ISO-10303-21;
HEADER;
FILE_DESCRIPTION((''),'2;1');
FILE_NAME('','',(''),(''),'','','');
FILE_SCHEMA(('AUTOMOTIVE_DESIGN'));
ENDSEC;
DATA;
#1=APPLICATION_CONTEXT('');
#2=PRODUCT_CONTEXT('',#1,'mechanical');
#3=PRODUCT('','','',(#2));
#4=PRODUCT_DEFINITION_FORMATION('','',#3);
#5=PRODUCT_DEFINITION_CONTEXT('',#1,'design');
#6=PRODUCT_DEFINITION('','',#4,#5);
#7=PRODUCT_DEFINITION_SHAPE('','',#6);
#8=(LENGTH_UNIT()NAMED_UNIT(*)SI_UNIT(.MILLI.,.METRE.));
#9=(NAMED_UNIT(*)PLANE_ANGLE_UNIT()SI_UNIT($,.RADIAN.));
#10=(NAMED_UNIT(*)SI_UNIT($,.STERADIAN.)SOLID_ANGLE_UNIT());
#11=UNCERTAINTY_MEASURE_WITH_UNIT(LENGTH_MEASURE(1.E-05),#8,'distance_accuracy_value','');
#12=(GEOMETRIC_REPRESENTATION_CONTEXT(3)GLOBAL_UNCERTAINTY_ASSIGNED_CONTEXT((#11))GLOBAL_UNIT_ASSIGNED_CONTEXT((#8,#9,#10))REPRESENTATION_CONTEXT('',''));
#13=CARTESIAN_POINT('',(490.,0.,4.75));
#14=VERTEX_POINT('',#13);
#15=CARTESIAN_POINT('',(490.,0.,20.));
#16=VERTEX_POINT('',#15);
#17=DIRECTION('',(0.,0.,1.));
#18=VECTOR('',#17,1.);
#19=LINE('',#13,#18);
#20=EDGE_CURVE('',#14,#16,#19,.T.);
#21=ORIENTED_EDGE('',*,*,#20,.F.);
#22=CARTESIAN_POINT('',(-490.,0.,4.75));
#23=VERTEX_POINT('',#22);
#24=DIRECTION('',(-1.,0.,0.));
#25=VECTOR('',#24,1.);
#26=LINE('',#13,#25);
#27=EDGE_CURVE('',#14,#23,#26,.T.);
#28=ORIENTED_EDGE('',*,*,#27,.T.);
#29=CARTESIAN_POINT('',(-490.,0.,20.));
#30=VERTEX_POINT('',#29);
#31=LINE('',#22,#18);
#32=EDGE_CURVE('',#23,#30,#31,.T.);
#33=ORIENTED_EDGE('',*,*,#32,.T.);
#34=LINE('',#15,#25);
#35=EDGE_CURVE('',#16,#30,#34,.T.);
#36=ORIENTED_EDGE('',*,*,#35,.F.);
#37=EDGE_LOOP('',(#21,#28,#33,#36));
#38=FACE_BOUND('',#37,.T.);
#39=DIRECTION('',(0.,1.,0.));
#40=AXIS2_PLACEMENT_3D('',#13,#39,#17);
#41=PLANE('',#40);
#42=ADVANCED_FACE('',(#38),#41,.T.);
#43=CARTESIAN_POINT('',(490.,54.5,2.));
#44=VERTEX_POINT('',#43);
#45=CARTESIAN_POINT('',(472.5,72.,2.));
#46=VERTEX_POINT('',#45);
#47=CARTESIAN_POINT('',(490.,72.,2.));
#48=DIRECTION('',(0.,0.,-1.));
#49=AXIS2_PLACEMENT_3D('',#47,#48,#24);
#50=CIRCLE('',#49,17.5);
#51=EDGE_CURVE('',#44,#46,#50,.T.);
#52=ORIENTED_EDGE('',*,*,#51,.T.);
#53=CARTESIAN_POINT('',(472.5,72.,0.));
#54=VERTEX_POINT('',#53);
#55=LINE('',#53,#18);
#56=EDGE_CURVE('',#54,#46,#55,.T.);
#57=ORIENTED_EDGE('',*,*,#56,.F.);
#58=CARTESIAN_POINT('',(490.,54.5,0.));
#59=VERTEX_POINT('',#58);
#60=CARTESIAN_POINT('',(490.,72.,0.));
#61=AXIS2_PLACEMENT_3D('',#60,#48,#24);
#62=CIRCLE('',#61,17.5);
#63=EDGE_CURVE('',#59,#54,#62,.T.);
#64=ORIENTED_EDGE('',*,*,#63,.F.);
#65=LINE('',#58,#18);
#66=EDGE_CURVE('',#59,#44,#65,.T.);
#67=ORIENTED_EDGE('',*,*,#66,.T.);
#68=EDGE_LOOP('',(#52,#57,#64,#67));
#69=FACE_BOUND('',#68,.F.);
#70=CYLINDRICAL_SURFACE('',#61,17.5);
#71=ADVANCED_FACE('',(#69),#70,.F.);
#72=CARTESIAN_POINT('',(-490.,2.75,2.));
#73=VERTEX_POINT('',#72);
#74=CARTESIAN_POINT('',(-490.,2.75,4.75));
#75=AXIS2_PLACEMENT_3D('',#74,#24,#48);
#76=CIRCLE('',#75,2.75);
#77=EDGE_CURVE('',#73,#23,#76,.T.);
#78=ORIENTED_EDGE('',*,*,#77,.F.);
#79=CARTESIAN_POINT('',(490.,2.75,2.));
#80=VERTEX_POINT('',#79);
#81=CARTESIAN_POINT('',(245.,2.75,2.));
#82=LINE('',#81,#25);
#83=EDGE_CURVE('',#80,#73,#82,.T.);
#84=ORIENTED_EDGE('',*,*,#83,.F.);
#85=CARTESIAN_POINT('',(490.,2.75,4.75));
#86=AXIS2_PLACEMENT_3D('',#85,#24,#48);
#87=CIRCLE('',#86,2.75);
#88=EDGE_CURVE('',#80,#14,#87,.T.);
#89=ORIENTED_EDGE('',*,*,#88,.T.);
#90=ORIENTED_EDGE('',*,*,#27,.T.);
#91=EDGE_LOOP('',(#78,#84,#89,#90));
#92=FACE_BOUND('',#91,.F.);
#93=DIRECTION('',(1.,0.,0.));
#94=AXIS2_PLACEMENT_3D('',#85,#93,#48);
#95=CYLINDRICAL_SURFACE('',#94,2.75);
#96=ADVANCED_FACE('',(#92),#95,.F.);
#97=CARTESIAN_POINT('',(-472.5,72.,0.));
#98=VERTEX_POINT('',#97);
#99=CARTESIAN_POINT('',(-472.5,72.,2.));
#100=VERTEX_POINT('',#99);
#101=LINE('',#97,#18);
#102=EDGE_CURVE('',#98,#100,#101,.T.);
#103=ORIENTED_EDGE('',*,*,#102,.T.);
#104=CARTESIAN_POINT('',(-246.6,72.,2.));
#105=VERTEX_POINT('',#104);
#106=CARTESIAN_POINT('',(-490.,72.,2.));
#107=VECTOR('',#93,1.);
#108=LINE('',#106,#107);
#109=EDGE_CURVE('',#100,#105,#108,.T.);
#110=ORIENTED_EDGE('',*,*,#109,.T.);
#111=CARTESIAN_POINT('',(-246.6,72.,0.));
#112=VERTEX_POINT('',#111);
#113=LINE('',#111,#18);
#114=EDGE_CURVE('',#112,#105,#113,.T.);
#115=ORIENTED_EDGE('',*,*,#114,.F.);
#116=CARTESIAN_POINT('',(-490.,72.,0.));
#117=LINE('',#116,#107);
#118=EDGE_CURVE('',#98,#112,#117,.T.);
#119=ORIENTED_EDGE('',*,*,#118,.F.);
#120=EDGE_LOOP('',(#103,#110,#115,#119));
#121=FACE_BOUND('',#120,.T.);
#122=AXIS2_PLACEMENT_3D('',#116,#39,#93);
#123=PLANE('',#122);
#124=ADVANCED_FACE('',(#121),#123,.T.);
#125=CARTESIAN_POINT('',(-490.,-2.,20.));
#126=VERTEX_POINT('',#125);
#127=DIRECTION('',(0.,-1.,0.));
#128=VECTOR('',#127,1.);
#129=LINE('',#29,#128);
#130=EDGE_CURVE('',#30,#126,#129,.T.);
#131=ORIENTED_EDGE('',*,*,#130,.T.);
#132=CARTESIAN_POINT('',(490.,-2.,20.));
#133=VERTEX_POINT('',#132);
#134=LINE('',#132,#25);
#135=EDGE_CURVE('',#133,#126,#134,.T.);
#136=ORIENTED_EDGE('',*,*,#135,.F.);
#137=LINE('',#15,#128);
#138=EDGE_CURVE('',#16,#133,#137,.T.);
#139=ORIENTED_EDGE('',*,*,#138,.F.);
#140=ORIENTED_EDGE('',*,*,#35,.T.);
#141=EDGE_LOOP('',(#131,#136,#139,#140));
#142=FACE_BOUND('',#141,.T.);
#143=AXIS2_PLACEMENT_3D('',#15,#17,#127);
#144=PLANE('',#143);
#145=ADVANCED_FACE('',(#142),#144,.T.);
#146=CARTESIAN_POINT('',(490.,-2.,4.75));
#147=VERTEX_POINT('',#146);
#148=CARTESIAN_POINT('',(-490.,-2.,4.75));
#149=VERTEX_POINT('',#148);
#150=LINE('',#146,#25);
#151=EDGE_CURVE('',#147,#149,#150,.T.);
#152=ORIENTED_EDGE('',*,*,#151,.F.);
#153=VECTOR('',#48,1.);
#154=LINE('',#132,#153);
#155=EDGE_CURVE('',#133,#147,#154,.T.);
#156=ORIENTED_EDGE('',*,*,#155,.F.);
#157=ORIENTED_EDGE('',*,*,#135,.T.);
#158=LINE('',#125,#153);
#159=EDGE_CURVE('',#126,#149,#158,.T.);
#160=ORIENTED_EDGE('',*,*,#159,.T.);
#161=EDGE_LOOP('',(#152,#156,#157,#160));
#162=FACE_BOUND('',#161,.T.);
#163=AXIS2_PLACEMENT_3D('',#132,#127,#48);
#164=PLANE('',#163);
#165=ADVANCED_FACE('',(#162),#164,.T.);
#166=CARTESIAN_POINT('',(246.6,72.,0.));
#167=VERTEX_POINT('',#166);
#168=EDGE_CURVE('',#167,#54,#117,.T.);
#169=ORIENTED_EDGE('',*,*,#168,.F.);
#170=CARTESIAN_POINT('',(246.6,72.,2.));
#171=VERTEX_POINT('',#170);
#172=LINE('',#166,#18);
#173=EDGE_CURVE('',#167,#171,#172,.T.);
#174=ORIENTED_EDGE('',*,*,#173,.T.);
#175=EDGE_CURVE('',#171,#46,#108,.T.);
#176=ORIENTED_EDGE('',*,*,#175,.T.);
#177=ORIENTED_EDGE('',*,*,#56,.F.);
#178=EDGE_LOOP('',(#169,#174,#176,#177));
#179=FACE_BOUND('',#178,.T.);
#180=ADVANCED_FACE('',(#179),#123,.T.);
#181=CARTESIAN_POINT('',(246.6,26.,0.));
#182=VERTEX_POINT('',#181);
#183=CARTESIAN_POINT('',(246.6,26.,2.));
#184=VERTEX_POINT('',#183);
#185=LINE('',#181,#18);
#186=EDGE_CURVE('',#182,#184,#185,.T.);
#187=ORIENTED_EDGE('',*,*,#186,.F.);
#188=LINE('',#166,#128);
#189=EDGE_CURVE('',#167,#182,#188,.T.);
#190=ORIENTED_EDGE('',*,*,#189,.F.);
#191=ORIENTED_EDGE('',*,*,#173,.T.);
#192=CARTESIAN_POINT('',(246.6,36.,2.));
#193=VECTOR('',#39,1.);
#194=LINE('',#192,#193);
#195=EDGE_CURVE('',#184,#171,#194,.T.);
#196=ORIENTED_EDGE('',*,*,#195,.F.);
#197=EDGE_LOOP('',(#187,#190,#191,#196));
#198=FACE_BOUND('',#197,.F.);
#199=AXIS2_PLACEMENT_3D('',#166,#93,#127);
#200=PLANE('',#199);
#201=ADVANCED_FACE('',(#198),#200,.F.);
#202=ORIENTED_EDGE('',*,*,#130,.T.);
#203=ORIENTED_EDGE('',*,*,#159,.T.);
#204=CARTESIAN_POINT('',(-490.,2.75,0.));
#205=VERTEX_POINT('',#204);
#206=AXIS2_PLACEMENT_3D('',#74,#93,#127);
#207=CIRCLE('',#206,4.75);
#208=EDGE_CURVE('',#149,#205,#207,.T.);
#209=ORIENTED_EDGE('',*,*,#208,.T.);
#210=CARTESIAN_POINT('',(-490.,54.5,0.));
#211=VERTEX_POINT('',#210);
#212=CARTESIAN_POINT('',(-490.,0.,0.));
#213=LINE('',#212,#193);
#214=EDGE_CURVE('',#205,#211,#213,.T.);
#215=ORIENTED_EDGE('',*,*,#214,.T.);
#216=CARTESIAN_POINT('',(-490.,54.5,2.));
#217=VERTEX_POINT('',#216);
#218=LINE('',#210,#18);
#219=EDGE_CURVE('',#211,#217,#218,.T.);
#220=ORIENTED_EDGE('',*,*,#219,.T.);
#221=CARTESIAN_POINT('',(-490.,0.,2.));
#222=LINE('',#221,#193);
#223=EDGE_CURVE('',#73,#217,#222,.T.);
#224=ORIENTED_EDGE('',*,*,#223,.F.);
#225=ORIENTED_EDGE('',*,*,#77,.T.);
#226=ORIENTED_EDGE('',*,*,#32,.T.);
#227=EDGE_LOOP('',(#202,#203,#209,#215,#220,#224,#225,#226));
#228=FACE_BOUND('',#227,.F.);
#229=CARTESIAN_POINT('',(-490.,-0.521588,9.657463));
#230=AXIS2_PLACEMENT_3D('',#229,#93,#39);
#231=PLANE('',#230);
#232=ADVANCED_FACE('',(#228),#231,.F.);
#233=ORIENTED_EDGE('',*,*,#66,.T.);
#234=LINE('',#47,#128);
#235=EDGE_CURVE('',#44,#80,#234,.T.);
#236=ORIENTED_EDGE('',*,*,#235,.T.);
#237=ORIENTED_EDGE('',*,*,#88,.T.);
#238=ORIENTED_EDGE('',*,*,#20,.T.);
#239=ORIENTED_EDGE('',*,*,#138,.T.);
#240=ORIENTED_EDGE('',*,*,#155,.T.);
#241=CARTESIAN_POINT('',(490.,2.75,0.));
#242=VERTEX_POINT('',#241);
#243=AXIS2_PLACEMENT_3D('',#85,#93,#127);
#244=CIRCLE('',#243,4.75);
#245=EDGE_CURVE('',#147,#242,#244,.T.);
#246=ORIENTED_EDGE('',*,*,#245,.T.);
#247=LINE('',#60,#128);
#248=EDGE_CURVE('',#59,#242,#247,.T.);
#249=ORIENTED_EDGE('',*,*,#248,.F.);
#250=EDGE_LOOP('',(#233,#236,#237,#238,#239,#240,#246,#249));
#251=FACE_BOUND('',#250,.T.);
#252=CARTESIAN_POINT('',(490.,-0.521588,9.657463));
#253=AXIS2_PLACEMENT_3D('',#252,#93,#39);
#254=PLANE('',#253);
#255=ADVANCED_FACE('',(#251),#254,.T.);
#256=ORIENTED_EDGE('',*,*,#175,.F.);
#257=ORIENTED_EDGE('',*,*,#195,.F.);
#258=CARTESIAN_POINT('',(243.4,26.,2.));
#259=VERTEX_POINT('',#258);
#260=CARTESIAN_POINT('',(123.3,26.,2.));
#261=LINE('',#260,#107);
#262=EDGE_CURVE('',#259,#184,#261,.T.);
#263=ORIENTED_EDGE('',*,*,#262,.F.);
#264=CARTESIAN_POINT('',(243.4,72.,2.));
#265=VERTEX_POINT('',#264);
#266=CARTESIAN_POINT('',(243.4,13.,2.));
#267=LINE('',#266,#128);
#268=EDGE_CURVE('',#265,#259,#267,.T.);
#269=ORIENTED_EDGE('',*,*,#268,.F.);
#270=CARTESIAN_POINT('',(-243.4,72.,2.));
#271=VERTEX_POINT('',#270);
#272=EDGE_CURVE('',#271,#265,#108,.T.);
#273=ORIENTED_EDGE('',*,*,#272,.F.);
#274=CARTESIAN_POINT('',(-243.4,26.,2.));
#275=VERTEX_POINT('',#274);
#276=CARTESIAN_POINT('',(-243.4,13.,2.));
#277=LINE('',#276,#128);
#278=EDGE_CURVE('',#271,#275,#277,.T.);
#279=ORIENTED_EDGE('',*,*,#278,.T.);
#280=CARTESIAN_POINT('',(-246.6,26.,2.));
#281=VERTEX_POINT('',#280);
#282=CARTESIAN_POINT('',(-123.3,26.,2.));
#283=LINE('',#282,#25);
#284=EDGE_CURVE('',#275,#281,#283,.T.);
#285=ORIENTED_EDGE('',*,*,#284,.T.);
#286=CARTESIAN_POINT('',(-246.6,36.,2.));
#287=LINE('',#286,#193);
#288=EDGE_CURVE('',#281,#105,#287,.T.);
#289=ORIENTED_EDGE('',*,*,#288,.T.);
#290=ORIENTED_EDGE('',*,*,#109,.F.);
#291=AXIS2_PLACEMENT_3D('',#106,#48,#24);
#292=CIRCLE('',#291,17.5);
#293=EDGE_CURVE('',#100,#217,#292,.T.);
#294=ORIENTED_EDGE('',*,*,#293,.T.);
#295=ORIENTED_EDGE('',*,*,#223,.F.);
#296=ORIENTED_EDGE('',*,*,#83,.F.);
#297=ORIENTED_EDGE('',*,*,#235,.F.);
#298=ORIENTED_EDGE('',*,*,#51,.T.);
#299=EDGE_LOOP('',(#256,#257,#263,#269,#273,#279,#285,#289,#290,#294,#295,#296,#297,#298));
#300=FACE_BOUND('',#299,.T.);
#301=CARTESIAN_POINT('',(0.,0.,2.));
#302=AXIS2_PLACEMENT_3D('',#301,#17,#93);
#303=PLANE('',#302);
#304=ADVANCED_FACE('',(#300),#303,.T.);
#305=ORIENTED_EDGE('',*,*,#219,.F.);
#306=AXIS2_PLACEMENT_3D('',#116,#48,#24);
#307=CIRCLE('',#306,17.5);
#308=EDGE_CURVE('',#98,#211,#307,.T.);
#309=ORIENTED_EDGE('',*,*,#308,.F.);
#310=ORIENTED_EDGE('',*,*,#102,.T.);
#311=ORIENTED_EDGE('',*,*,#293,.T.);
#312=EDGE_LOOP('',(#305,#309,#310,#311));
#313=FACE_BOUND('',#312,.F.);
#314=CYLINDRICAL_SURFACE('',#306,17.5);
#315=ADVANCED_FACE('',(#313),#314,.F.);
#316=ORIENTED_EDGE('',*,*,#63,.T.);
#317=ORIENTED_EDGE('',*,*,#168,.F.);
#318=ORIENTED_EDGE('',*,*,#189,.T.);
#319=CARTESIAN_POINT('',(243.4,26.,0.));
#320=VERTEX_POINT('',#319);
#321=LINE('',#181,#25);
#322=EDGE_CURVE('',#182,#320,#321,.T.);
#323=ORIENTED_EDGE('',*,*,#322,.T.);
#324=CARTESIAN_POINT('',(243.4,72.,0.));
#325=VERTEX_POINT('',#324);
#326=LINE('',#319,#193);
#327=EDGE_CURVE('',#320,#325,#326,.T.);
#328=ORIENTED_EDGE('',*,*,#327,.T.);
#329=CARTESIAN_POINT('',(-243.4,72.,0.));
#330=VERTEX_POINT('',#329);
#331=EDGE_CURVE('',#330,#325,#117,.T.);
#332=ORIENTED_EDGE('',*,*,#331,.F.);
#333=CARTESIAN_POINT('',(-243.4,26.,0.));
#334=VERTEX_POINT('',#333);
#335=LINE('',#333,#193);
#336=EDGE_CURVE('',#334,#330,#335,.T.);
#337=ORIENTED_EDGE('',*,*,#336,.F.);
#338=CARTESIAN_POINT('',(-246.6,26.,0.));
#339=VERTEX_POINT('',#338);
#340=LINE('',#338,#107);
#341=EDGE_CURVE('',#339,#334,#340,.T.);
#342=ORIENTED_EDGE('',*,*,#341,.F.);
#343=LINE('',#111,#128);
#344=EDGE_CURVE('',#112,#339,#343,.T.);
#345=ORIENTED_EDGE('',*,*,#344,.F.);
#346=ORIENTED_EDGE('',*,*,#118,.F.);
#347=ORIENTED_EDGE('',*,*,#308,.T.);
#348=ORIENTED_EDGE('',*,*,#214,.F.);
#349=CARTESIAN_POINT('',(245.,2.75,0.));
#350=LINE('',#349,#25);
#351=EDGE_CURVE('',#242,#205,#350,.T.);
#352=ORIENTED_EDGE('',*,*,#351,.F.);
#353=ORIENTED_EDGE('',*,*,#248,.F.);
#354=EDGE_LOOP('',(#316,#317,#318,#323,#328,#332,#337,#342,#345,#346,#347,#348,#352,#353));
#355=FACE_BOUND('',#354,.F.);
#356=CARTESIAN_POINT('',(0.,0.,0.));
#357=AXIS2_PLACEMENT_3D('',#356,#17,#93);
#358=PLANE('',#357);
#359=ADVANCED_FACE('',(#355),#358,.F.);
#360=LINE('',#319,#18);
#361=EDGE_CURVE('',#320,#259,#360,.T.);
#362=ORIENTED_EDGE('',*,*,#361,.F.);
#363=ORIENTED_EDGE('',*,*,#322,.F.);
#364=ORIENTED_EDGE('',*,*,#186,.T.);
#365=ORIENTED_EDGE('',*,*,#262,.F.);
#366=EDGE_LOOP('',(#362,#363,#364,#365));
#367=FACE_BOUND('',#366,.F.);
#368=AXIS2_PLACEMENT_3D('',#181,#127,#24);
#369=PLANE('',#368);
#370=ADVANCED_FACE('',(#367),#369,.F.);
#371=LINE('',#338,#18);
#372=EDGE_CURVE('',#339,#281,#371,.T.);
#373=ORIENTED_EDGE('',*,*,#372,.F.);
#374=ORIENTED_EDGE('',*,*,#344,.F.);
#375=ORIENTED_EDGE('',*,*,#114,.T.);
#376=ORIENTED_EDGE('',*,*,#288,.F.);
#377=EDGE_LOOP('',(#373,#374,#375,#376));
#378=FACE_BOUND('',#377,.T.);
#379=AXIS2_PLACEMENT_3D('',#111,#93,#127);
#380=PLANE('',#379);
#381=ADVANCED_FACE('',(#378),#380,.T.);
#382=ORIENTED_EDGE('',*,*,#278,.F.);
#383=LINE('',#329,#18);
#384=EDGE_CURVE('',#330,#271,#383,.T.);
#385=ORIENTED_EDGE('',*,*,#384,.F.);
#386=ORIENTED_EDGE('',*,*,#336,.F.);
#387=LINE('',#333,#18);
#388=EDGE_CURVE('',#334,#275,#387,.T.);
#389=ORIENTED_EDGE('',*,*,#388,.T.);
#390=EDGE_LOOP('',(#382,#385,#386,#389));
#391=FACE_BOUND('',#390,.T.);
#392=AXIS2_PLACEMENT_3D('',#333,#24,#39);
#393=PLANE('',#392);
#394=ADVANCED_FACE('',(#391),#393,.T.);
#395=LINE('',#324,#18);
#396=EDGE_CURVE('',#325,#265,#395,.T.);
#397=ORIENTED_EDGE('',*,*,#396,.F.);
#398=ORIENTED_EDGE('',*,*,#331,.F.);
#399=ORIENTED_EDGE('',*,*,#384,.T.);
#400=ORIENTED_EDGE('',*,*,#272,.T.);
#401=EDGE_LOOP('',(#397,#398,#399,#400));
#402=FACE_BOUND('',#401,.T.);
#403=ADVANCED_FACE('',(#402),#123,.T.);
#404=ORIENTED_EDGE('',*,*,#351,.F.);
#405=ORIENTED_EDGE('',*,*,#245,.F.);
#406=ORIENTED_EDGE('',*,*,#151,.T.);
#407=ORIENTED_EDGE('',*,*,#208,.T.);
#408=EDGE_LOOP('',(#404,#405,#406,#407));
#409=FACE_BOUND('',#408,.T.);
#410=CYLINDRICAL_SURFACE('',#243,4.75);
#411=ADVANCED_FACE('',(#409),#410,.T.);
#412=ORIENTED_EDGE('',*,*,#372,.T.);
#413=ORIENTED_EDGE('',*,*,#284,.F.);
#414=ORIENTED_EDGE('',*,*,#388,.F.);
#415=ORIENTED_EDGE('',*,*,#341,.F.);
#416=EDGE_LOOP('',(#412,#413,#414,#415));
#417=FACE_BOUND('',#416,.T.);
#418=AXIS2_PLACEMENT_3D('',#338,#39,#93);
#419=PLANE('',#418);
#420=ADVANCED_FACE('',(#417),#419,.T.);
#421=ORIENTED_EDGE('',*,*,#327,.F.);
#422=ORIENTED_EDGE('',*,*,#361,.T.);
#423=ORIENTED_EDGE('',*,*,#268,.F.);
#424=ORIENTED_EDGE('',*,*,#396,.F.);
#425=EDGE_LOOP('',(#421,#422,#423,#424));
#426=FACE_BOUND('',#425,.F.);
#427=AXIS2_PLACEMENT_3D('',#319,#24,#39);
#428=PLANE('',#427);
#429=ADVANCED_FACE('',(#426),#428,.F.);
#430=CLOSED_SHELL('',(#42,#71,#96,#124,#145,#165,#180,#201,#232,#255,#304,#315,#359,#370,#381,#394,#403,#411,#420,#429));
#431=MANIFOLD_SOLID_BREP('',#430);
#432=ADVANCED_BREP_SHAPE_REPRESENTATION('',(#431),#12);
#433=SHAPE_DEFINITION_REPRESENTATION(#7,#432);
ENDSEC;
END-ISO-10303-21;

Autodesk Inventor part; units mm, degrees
ref_plane "YZ Plane" through (0, 0, 0) normal (1, 0, 0) x (0, 1, 0)
ref_plane "XZ Plane" through (0, 0, 0) normal (0, 1, 0) x (-1, 0, 0)
ref_plane "XY Plane" through (0, 0, 0) normal (0, 0, 1) x (1, 0, 0)
sketch "Sketch1" plane through (0, 0, 0) normal (0, 0, 1) x (1, 0, 0)
  line L0 (-490, 72) -> (490, 72)
  line L1 (490, 72) -> (490, 0)
  line L2 (490, 0) -> (-490, 0)
  line L3 (-490, 0) -> (-490, 72)
  point P0 (0, 0)
  point P1 (0, 0)
  dimension "d0" = 980
  dimension "d1" = 72
extrude "Plate1" add sketch "Sketch1" along normal blind 2
sketch "Sketch2" plane through (490, -2, 0) normal (0, 1, 0) x (-1, 0, 0)
  line L0 (980, 0) -> (0, 0)
  line L1 (0, 0) -> (0, 20)
  line L2 (0, 20) -> (980, 20)
  line L3 (980, 20) -> (980, 0)
edge flange "Flange1" height 20 angle 90 thickness 2 bend radius 2.75 thickness toward (0, 1, 0) relief round relief width 2 relief depth 1 edges at (0, 0, 2) wall of the first edge with corners at (-490, -2, 0) (490, -2, 0) (490, -2, 20) (-490, -2, 20)
bend "Bend1"
corner "Corner1"
sketch "Sketch5" plane through (0, 0, 0) normal (0, 0, -1) x (-1, 0, 0)
  line L0 (490, 72) -> (-490, 72) projected
  line L1 (490, -2) -> (-490, -2) projected
  circle A0 centre (0, 72) radius 17.5
  line L2 (243.4, 72) -> (246.6, 72)
  line L3 (246.6, 72) -> (246.6, 26)
  line L4 (246.6, 26) -> (243.4, 26)
  line L5 (243.4, 26) -> (243.4, 72)
  line L6 (-243.4, 72) -> (-246.6, 72)
  line L7 (-246.6, 72) -> (-246.6, 26)
  line L8 (-246.6, 26) -> (-243.4, 26)
  line L9 (-243.4, 26) -> (-243.4, 72)
  line L10 (0, 72) -> (0, -2) construction
  line L11 (-490, -2) -> (-490, 72)
  line L12 (490, -2) -> (490, 72)
  circle A1 centre (-490, 72) radius 17.5
  circle A2 centre (490, 72) radius 17.5
  point P0 (0, 0)
  point P1 (245, 26)
  point P2 (-245, 26)
  point P3 (246.6, 72)
  point P4 (-17.5, 72)
  point P5 (17.5, 72)
  point P6 (-246.6, 72)
  point P7 (472.5, 72)
  point P8 (490, 54.5)
  point P9 (-490, 54.5)
  point P10 (-472.5, 72)
  dimension "d45" = 35
  dimension "d48" = 3.2
  dimension "d49" = 490
  dimension "d51" = 28
  dimension "d52" = 46
extrude "Extrusion1" cut sketch "Sketch5" against normal through all contours L3 L4 L5 L0 | L0 L12 A2 | L9 L8 L7 L0 | L11 L0 A1 picked at (478.4796, 70.702) picked at (-478.4796, 70.702)
sketch "Sketch9" plane through (0, 0, 2) normal (0, 0, 1) x (1, 0, 0)
  line L0 (467.0539, 27.7998) -> (467.0539, 15.7998) construction
  line L1 (467.0539, 15.7998) -> (267.0539, 15.7998) construction
  line L2 (267.0539, 15.7998) -> (267.0539, 27.7998) construction
  line L3 (267.0539, 27.7998) -> (467.0539, 27.7998) construction
  line L4 (-490, 72) -> (490, 72) projected
  point P0 (0, 0)
  point P1 (1.05, 68)
  point P2 (490, 72)
  point P3 (-490, 72)
  dimension "d40" = 200
  dimension "d41" = 12
mark "Mark2"
equation "\"d2\" = Thickness"
equation "\"d3\" = BendReliefWidth"
equation "\"d4\" = BendReliefDepth"
equation "\"d5\" = MinimumRemnant"
equation "\"d6\" = TransitionRadius"
equation "\"d9\" = BendRadius"
equation "\"d10\" = CornerReliefSize"
equation "\"d11\" = GapSize"
equation "\"d12\" = JacobiRadiusSize"
equation "\"BendReliefWidth\" = Thickness"
equation "\"BendReliefDepth\" = 0.5 * Thickness"
equation "\"CornerReliefSize\" = 4 * Thickness"
equation "\"MinimumRemnant\" = 2 * Thickness"
equation "\"TransitionRadius\" = BendRadius"
equation "\"JacobiRadiusSize\" = BendRadius"
equation "\"GapSize\" = Thickness"
equation "\"Thickness\" = 2"
equation "\"BendRadius\" = 2.75"
properties part number "MSC 344 stringer BOARD  ####" material "Stainless Steel"
